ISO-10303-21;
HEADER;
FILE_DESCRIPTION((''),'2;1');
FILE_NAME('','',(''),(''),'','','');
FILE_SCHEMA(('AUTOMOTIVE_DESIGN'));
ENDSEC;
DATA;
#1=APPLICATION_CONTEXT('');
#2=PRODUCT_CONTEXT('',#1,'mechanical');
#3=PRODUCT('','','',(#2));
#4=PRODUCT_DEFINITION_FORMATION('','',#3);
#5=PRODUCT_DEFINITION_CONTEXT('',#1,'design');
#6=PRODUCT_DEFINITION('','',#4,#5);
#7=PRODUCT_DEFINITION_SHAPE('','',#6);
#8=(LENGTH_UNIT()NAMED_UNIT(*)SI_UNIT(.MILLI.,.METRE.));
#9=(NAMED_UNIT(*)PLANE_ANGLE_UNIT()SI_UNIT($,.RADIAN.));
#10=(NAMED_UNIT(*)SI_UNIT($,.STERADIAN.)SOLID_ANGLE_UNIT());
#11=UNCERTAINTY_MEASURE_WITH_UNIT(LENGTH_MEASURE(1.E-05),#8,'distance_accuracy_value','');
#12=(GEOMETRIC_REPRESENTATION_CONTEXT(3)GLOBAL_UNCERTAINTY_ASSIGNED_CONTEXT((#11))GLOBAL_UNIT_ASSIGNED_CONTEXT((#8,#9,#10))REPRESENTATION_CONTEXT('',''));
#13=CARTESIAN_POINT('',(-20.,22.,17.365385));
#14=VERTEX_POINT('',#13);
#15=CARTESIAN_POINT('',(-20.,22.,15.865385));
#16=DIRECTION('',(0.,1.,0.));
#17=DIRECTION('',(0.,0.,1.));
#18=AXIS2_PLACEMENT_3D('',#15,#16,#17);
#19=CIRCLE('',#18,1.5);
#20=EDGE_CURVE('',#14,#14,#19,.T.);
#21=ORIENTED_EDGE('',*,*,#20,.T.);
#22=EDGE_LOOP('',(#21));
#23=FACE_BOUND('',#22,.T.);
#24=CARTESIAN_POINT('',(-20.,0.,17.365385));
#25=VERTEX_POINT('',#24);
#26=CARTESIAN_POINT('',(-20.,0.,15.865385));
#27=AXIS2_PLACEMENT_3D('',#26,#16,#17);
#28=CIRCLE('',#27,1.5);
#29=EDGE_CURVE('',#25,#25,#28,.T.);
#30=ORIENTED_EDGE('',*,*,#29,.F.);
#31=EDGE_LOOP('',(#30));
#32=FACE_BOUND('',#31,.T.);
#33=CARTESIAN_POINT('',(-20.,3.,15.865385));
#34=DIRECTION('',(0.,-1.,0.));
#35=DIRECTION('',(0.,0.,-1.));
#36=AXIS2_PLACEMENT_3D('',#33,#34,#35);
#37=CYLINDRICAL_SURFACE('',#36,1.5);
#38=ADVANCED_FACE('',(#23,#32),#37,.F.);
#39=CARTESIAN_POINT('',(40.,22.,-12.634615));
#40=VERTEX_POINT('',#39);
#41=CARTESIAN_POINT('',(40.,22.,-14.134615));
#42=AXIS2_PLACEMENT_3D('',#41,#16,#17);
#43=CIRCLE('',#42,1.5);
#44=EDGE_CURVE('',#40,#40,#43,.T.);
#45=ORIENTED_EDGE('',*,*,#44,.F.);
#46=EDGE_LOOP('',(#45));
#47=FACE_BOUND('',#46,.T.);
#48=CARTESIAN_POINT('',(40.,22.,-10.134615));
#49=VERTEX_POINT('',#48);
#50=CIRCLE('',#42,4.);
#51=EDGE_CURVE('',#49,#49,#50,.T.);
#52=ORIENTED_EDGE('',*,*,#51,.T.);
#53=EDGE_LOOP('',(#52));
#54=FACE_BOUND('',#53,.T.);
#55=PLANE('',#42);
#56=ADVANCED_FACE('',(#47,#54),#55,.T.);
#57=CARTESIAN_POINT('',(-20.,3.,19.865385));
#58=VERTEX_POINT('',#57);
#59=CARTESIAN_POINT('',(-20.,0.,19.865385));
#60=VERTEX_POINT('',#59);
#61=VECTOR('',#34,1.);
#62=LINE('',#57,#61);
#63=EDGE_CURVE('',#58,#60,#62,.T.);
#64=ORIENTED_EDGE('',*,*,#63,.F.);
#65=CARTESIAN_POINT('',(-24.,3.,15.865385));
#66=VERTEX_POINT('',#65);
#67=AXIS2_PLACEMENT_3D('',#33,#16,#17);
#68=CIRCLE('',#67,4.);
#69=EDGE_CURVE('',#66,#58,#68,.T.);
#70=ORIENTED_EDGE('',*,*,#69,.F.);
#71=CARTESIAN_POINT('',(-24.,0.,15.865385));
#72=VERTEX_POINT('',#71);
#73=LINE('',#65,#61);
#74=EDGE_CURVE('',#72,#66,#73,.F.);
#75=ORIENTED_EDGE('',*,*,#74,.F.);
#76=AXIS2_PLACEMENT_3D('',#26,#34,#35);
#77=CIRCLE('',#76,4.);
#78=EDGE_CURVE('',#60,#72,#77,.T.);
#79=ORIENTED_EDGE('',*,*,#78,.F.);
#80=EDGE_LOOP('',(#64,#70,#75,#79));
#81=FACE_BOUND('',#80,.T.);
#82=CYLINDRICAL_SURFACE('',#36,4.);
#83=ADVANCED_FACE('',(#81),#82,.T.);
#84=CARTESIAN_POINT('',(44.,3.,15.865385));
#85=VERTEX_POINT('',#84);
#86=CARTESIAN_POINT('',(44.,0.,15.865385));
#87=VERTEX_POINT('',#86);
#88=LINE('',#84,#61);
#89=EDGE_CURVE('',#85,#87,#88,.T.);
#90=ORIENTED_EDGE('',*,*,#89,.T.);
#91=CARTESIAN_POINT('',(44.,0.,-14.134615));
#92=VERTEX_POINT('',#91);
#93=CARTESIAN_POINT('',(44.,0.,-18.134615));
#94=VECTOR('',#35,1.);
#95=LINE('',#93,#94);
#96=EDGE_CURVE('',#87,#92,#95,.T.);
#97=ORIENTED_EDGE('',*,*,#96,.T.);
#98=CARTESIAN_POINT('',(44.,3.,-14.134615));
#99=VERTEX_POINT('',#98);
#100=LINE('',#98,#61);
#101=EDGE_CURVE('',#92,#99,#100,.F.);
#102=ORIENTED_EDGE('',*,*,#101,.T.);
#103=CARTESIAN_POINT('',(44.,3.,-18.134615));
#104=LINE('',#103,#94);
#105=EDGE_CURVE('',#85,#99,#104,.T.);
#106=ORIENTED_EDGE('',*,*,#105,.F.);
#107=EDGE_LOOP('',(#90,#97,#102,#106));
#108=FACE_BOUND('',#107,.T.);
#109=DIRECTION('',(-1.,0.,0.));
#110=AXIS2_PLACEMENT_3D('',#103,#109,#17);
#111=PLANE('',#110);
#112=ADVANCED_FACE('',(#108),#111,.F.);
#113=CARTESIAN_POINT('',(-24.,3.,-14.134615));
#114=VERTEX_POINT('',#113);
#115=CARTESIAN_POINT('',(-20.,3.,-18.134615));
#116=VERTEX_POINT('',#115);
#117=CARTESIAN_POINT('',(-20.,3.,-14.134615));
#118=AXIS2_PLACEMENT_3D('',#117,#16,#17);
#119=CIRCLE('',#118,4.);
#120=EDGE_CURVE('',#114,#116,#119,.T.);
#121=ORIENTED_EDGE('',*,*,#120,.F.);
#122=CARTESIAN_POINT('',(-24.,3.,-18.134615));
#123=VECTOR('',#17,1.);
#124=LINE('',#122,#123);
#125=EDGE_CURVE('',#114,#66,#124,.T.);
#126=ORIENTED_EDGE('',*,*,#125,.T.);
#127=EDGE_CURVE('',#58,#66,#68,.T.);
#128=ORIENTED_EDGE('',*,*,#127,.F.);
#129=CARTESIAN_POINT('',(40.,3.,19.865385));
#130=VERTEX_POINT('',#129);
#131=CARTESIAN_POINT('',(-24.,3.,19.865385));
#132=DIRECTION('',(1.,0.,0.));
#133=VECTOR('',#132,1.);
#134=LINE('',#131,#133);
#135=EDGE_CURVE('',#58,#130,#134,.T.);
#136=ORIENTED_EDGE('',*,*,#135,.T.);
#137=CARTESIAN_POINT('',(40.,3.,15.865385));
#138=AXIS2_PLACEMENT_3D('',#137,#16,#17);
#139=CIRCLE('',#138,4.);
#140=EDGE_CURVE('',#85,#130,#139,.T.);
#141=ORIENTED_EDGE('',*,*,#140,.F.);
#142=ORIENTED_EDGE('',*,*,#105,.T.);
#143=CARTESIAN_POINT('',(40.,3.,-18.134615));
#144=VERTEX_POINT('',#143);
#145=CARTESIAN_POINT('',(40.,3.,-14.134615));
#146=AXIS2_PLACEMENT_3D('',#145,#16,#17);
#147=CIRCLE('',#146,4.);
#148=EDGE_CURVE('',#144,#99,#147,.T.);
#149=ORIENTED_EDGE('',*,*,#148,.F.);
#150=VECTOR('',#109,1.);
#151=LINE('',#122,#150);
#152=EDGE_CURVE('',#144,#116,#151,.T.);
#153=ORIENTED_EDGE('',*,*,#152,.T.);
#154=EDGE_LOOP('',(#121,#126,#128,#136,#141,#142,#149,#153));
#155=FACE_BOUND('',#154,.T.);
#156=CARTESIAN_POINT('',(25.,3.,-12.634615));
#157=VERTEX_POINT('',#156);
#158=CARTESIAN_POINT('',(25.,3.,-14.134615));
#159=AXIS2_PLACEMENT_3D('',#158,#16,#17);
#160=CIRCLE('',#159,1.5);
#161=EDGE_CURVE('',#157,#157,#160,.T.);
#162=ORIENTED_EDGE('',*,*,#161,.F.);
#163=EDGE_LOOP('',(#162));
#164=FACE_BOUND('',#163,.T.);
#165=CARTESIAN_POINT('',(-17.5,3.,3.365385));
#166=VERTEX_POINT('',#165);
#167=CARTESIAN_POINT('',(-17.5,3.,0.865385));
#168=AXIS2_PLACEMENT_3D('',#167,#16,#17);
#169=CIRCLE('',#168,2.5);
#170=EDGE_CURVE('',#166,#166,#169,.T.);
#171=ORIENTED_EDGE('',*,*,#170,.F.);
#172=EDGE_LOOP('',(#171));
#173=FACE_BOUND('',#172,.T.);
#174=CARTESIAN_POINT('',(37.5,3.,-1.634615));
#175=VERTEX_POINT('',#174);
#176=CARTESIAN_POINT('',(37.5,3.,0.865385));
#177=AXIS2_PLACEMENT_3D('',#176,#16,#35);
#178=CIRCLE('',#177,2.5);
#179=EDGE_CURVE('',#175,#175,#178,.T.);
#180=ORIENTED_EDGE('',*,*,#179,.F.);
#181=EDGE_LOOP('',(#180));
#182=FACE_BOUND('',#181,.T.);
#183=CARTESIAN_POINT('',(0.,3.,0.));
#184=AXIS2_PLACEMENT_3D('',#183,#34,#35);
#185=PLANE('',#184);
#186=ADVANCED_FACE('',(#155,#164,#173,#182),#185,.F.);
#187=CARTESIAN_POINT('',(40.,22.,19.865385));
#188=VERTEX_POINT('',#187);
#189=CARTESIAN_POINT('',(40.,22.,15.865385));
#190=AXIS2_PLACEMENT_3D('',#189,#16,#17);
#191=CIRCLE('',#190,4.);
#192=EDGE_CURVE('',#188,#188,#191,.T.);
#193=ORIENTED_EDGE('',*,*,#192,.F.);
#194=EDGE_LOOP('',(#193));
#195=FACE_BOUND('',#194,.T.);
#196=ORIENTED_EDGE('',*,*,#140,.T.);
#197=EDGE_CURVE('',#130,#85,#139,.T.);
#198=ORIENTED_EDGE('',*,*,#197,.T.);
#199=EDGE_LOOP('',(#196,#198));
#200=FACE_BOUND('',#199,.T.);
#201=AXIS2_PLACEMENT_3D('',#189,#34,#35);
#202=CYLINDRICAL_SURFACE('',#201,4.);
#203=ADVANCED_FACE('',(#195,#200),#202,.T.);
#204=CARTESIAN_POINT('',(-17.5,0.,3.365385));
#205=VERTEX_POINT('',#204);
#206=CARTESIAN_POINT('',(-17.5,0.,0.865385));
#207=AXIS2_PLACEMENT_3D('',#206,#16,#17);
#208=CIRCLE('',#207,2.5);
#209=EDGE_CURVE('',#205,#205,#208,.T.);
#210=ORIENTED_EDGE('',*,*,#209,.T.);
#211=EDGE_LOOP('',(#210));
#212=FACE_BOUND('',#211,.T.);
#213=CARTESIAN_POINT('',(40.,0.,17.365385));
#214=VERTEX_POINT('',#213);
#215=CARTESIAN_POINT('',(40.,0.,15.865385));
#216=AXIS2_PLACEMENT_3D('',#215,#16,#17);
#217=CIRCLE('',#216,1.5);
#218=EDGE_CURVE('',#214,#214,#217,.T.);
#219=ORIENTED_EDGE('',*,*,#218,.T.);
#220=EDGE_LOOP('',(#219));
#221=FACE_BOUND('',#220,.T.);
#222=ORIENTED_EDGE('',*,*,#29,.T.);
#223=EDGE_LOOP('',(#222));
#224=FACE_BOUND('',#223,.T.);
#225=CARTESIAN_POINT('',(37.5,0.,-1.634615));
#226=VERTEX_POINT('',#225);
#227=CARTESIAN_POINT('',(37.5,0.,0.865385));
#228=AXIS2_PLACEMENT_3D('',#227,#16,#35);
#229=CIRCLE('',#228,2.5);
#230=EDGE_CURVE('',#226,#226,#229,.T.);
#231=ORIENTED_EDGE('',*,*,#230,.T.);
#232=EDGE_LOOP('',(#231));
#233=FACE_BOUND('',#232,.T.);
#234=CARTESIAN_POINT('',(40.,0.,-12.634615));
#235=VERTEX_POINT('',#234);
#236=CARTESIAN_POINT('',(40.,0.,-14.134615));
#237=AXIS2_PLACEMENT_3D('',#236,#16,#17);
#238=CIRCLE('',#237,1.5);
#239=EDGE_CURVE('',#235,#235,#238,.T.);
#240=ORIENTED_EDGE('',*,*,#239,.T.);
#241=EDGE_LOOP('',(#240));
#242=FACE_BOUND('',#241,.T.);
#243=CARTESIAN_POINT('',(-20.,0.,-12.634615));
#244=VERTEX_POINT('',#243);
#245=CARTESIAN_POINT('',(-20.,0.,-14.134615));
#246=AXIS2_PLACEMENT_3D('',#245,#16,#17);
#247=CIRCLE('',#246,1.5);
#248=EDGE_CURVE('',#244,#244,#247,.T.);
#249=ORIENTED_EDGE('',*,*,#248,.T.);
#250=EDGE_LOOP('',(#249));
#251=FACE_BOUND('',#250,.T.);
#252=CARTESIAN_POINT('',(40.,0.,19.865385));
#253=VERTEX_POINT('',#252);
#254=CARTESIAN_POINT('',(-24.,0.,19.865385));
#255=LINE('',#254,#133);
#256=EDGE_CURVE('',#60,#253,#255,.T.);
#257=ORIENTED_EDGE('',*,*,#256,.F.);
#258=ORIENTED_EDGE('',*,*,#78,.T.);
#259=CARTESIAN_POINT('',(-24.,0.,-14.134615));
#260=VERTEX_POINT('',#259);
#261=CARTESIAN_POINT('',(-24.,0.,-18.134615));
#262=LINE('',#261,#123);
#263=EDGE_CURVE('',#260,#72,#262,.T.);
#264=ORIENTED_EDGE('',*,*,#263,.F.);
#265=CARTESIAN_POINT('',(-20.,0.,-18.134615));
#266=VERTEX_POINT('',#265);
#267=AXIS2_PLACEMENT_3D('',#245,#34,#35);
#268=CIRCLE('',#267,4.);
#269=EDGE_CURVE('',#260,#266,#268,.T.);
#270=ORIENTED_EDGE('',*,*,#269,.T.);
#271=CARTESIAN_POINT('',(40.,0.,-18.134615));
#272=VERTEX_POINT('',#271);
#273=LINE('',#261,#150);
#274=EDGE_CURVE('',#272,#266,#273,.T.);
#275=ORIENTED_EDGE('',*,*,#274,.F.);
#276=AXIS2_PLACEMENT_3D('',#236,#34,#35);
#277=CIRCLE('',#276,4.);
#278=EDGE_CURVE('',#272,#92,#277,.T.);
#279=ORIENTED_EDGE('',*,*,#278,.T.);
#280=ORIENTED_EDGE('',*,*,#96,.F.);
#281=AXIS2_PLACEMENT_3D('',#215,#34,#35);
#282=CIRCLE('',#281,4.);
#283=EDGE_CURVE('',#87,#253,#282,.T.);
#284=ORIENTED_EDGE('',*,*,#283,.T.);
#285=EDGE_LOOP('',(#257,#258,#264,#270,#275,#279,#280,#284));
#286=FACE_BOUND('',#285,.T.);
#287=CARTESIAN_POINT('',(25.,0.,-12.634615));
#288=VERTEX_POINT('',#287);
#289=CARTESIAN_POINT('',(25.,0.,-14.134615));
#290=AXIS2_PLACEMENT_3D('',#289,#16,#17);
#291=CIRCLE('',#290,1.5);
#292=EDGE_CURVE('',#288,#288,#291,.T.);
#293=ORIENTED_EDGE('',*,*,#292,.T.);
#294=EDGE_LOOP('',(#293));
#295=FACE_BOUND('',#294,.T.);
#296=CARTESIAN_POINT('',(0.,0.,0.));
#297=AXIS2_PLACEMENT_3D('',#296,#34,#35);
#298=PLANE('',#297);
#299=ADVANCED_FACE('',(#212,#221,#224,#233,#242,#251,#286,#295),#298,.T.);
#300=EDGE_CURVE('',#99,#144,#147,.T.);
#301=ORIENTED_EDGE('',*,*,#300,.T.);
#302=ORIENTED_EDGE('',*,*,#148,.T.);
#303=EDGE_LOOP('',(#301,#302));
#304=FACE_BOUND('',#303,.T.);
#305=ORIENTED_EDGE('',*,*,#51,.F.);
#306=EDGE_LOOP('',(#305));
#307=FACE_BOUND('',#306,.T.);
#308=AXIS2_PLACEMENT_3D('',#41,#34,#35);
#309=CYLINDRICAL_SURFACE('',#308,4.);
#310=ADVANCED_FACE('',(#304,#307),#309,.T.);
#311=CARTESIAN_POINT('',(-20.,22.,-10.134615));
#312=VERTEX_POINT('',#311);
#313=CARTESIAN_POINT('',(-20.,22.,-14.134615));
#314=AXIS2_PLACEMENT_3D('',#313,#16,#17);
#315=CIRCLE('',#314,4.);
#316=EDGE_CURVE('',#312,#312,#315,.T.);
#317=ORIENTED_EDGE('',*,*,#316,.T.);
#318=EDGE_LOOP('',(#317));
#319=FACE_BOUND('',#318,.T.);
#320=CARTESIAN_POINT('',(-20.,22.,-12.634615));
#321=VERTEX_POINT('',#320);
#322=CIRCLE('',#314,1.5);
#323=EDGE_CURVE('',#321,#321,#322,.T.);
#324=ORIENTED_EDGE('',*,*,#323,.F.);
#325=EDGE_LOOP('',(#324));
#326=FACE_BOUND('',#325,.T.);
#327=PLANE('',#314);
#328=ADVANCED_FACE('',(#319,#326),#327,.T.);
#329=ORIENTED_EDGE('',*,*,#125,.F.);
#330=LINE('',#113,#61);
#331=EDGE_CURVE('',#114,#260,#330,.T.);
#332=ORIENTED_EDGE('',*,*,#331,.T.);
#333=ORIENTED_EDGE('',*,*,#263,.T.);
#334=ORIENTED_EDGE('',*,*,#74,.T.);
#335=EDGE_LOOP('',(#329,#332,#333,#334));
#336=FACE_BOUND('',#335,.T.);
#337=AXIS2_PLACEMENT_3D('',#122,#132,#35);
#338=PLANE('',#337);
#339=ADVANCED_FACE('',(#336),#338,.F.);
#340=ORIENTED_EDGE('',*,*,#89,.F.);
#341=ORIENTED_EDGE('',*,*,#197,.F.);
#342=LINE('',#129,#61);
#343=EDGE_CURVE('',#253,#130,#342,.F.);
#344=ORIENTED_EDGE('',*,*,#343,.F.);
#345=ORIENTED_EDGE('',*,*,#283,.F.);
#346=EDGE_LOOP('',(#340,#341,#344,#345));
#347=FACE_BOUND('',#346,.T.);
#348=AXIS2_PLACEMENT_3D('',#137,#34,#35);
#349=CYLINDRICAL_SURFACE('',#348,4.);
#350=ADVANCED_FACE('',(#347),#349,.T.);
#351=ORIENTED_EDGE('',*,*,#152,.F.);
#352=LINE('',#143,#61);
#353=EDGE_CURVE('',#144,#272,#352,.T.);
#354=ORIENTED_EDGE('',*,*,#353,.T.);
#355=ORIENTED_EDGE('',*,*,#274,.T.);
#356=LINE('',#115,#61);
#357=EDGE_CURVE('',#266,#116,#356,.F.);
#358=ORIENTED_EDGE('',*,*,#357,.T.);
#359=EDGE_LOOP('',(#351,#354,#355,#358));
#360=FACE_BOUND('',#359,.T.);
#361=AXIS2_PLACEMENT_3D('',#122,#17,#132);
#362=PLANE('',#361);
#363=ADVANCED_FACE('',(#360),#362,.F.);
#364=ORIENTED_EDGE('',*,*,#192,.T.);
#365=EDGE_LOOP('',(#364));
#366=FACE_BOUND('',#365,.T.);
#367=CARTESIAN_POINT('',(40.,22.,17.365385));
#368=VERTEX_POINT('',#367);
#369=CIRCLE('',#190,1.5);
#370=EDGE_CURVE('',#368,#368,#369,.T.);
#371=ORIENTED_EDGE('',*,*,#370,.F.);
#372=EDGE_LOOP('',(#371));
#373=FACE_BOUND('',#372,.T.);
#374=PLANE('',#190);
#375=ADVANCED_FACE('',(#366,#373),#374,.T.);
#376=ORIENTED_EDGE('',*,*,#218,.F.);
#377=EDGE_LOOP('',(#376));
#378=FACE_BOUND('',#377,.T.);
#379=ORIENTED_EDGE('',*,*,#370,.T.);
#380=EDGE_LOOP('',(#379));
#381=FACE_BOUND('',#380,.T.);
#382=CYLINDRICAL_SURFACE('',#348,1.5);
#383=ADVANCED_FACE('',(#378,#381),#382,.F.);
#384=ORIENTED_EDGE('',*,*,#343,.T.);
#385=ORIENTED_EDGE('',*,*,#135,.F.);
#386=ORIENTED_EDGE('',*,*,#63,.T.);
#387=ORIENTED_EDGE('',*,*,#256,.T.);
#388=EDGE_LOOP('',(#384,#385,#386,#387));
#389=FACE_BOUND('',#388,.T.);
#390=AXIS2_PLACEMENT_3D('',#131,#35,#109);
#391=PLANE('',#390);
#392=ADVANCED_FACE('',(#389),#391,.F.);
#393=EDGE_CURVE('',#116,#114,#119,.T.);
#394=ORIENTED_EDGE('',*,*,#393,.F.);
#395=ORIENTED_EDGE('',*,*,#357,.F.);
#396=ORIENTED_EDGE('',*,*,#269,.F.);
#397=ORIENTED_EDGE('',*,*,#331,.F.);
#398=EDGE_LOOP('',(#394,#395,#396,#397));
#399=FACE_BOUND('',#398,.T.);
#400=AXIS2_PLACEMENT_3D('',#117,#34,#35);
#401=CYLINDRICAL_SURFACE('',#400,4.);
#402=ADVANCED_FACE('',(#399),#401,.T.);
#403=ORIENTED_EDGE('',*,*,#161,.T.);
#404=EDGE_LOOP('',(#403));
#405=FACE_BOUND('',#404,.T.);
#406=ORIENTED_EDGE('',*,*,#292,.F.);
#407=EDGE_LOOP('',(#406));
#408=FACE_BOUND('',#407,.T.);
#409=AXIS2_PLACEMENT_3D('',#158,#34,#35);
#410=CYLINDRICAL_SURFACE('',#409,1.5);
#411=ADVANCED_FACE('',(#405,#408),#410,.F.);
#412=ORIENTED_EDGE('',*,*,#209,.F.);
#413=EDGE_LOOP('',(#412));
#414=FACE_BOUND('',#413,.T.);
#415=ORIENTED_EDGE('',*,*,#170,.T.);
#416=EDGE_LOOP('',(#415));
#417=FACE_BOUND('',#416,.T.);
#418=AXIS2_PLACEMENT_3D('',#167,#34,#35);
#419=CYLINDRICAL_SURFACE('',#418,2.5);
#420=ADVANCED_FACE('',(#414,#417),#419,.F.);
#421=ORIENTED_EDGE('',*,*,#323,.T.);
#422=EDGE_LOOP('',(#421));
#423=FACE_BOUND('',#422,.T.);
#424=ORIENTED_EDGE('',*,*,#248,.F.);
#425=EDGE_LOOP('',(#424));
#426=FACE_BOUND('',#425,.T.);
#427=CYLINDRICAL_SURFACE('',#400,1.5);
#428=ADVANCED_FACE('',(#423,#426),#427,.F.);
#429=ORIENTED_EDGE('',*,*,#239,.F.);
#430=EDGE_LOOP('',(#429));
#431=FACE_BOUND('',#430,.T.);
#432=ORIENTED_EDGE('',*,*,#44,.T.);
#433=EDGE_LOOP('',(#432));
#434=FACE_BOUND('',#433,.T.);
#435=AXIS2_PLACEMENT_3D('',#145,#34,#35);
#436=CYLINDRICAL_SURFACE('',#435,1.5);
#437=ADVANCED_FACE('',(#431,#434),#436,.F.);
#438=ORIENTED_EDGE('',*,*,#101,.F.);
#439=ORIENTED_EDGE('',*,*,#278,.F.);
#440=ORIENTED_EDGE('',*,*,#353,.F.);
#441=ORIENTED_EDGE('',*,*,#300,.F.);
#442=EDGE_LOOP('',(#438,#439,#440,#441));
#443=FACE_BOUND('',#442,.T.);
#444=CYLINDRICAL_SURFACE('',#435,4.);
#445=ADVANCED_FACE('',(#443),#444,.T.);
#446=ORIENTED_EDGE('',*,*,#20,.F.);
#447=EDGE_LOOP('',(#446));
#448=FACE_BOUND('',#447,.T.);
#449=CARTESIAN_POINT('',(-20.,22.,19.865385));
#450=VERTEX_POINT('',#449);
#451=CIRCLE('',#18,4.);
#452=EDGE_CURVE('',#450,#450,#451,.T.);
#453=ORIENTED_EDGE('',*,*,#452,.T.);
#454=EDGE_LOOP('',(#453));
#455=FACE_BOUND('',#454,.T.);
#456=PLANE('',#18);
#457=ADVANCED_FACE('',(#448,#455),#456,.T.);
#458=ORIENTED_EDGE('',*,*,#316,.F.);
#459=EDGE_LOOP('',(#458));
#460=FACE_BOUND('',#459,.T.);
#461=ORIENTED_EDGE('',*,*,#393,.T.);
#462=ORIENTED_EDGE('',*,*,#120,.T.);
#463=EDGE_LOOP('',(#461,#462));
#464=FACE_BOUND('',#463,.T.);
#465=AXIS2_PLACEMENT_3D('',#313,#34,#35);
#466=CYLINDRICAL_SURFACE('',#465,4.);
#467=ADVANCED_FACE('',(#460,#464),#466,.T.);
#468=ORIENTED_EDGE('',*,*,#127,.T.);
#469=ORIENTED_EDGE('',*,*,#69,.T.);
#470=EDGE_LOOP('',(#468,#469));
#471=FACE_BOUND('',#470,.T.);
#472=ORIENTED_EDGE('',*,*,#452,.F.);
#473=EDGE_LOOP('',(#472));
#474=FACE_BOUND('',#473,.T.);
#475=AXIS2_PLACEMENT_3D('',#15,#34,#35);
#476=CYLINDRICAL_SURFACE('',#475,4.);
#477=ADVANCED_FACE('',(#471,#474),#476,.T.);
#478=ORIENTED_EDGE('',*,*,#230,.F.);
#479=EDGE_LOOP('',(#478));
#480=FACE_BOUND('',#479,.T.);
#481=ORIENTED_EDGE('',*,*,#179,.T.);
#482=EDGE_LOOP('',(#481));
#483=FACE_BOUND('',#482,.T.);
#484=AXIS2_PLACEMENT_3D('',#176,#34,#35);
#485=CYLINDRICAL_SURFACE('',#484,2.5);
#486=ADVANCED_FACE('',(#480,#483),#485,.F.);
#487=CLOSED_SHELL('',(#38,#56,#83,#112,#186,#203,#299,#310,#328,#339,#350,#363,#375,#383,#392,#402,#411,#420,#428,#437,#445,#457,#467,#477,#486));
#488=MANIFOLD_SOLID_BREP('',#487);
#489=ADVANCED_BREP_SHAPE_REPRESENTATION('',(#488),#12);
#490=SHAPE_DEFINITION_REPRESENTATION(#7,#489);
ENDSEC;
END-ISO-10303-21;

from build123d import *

# Parameters (mm, degrees)
SKETCH_1_W      = 68
SKETCH_1_H      = 38
SKETCH_1_R      = 1.5
SKETCH_1_R_2    = 2.5
EXTRUDE_1_DEPTH = 3
SKETCH_2_R      = 4
SKETCH_2_R_2    = 1.5
EXTRUDE_2_DEPTH = 19
FILLET_1_R      = 4


with BuildPart() as part:
    # 草图1 → 凸台-拉伸1 (new body)
    with BuildSketch(Plane(origin=(0, 0, 0), x_dir=(1, 0, 0), z_dir=(0, 1, 0))):
        with Locations((10, -0.865384615)):
            Rectangle(SKETCH_1_W, SKETCH_1_H)
        with Locations(Location((-20, -15.865384615, 0), (0, 0, 270))):
            Circle(SKETCH_1_R, mode=Mode.SUBTRACT)
        with Locations(Location((-20, 14.134615385, 0), (0, 0, 270))):
            Circle(SKETCH_1_R, mode=Mode.SUBTRACT)
        with Locations(Location((40, 14.134615385, 0), (0, 0, 270))):
            Circle(SKETCH_1_R, mode=Mode.SUBTRACT)
        with Locations(Location((40, -15.865384615, 0), (0, 0, 270))):
            Circle(SKETCH_1_R, mode=Mode.SUBTRACT)
        with Locations(Location((-17.5, -0.865384615, 0), (0, 0, 270))):
            Circle(SKETCH_1_R_2, mode=Mode.SUBTRACT)
        with Locations(Location((37.5, -0.865384615, 0), (0, 0, 90))):
            Circle(SKETCH_1_R_2, mode=Mode.SUBTRACT)
        with Locations(Location((25, 14.134615385, 0), (0, 0, 270))):
            Circle(SKETCH_1_R, mode=Mode.SUBTRACT)
    extrude(amount=EXTRUDE_1_DEPTH)

    # 草图2 → 凸台-拉伸2 (add)
    # profile 1 of 4: a face of its own
    with BuildSketch(Plane(origin=(0, 3, 0), x_dir=(1, 0, 0), z_dir=(0, 1, 0))):
        with Locations(Location((-20, -15.865384615, 0), (0, 0, 270))):
            Circle(SKETCH_2_R)
        with Locations(Location((-20, -15.865384615, 0), (0, 0, 270))):
            Circle(SKETCH_2_R_2, mode=Mode.SUBTRACT)
    # profile 2 of 4: a face of its own
    with BuildSketch(Plane(origin=(0, 3, 0), x_dir=(1, 0, 0), z_dir=(0, 1, 0))):
        with Locations(Location((40, -15.865384615, 0), (0, 0, 270))):
            Circle(SKETCH_2_R)
        with Locations(Location((40, -15.865384615, 0), (0, 0, 270))):
            Circle(SKETCH_2_R_2, mode=Mode.SUBTRACT)
    # profile 3 of 4: a face of its own
    with BuildSketch(Plane(origin=(0, 3, 0), x_dir=(1, 0, 0), z_dir=(0, 1, 0))):
        with Locations(Location((-20, 14.134615385, 0), (0, 0, 90))):
            Circle(SKETCH_2_R)
        with Locations(Location((-20, 14.134615385, 0), (0, 0, 270))):
            Circle(SKETCH_2_R_2, mode=Mode.SUBTRACT)
    # profile 4 of 4: a face of its own
    with BuildSketch(Plane(origin=(0, 3, 0), x_dir=(1, 0, 0), z_dir=(0, 1, 0))):
        with Locations(Location((40, 14.134615385, 0), (0, 0, 90))):
            Circle(SKETCH_2_R)
        with Locations(Location((40, 14.134615385, 0), (0, 0, 270))):
            Circle(SKETCH_2_R_2, mode=Mode.SUBTRACT)
    extrude(amount=EXTRUDE_2_DEPTH)

    # 圆角1
    fillet_1_edges = [part.edges().sort_by_distance(p)[0] for p in [
        (44, 1.5, 19.865384615),
        (44, 1.5, -18.134615385),
        (-24, 1.5, -18.134615385),
        (-24, 1.5, 19.865384615),
    ]]
    fillet(fillet_1_edges, radius=FILLET_1_R - 0.0001)  # a hair under: the kernel refuses the full size


solid = part.part
